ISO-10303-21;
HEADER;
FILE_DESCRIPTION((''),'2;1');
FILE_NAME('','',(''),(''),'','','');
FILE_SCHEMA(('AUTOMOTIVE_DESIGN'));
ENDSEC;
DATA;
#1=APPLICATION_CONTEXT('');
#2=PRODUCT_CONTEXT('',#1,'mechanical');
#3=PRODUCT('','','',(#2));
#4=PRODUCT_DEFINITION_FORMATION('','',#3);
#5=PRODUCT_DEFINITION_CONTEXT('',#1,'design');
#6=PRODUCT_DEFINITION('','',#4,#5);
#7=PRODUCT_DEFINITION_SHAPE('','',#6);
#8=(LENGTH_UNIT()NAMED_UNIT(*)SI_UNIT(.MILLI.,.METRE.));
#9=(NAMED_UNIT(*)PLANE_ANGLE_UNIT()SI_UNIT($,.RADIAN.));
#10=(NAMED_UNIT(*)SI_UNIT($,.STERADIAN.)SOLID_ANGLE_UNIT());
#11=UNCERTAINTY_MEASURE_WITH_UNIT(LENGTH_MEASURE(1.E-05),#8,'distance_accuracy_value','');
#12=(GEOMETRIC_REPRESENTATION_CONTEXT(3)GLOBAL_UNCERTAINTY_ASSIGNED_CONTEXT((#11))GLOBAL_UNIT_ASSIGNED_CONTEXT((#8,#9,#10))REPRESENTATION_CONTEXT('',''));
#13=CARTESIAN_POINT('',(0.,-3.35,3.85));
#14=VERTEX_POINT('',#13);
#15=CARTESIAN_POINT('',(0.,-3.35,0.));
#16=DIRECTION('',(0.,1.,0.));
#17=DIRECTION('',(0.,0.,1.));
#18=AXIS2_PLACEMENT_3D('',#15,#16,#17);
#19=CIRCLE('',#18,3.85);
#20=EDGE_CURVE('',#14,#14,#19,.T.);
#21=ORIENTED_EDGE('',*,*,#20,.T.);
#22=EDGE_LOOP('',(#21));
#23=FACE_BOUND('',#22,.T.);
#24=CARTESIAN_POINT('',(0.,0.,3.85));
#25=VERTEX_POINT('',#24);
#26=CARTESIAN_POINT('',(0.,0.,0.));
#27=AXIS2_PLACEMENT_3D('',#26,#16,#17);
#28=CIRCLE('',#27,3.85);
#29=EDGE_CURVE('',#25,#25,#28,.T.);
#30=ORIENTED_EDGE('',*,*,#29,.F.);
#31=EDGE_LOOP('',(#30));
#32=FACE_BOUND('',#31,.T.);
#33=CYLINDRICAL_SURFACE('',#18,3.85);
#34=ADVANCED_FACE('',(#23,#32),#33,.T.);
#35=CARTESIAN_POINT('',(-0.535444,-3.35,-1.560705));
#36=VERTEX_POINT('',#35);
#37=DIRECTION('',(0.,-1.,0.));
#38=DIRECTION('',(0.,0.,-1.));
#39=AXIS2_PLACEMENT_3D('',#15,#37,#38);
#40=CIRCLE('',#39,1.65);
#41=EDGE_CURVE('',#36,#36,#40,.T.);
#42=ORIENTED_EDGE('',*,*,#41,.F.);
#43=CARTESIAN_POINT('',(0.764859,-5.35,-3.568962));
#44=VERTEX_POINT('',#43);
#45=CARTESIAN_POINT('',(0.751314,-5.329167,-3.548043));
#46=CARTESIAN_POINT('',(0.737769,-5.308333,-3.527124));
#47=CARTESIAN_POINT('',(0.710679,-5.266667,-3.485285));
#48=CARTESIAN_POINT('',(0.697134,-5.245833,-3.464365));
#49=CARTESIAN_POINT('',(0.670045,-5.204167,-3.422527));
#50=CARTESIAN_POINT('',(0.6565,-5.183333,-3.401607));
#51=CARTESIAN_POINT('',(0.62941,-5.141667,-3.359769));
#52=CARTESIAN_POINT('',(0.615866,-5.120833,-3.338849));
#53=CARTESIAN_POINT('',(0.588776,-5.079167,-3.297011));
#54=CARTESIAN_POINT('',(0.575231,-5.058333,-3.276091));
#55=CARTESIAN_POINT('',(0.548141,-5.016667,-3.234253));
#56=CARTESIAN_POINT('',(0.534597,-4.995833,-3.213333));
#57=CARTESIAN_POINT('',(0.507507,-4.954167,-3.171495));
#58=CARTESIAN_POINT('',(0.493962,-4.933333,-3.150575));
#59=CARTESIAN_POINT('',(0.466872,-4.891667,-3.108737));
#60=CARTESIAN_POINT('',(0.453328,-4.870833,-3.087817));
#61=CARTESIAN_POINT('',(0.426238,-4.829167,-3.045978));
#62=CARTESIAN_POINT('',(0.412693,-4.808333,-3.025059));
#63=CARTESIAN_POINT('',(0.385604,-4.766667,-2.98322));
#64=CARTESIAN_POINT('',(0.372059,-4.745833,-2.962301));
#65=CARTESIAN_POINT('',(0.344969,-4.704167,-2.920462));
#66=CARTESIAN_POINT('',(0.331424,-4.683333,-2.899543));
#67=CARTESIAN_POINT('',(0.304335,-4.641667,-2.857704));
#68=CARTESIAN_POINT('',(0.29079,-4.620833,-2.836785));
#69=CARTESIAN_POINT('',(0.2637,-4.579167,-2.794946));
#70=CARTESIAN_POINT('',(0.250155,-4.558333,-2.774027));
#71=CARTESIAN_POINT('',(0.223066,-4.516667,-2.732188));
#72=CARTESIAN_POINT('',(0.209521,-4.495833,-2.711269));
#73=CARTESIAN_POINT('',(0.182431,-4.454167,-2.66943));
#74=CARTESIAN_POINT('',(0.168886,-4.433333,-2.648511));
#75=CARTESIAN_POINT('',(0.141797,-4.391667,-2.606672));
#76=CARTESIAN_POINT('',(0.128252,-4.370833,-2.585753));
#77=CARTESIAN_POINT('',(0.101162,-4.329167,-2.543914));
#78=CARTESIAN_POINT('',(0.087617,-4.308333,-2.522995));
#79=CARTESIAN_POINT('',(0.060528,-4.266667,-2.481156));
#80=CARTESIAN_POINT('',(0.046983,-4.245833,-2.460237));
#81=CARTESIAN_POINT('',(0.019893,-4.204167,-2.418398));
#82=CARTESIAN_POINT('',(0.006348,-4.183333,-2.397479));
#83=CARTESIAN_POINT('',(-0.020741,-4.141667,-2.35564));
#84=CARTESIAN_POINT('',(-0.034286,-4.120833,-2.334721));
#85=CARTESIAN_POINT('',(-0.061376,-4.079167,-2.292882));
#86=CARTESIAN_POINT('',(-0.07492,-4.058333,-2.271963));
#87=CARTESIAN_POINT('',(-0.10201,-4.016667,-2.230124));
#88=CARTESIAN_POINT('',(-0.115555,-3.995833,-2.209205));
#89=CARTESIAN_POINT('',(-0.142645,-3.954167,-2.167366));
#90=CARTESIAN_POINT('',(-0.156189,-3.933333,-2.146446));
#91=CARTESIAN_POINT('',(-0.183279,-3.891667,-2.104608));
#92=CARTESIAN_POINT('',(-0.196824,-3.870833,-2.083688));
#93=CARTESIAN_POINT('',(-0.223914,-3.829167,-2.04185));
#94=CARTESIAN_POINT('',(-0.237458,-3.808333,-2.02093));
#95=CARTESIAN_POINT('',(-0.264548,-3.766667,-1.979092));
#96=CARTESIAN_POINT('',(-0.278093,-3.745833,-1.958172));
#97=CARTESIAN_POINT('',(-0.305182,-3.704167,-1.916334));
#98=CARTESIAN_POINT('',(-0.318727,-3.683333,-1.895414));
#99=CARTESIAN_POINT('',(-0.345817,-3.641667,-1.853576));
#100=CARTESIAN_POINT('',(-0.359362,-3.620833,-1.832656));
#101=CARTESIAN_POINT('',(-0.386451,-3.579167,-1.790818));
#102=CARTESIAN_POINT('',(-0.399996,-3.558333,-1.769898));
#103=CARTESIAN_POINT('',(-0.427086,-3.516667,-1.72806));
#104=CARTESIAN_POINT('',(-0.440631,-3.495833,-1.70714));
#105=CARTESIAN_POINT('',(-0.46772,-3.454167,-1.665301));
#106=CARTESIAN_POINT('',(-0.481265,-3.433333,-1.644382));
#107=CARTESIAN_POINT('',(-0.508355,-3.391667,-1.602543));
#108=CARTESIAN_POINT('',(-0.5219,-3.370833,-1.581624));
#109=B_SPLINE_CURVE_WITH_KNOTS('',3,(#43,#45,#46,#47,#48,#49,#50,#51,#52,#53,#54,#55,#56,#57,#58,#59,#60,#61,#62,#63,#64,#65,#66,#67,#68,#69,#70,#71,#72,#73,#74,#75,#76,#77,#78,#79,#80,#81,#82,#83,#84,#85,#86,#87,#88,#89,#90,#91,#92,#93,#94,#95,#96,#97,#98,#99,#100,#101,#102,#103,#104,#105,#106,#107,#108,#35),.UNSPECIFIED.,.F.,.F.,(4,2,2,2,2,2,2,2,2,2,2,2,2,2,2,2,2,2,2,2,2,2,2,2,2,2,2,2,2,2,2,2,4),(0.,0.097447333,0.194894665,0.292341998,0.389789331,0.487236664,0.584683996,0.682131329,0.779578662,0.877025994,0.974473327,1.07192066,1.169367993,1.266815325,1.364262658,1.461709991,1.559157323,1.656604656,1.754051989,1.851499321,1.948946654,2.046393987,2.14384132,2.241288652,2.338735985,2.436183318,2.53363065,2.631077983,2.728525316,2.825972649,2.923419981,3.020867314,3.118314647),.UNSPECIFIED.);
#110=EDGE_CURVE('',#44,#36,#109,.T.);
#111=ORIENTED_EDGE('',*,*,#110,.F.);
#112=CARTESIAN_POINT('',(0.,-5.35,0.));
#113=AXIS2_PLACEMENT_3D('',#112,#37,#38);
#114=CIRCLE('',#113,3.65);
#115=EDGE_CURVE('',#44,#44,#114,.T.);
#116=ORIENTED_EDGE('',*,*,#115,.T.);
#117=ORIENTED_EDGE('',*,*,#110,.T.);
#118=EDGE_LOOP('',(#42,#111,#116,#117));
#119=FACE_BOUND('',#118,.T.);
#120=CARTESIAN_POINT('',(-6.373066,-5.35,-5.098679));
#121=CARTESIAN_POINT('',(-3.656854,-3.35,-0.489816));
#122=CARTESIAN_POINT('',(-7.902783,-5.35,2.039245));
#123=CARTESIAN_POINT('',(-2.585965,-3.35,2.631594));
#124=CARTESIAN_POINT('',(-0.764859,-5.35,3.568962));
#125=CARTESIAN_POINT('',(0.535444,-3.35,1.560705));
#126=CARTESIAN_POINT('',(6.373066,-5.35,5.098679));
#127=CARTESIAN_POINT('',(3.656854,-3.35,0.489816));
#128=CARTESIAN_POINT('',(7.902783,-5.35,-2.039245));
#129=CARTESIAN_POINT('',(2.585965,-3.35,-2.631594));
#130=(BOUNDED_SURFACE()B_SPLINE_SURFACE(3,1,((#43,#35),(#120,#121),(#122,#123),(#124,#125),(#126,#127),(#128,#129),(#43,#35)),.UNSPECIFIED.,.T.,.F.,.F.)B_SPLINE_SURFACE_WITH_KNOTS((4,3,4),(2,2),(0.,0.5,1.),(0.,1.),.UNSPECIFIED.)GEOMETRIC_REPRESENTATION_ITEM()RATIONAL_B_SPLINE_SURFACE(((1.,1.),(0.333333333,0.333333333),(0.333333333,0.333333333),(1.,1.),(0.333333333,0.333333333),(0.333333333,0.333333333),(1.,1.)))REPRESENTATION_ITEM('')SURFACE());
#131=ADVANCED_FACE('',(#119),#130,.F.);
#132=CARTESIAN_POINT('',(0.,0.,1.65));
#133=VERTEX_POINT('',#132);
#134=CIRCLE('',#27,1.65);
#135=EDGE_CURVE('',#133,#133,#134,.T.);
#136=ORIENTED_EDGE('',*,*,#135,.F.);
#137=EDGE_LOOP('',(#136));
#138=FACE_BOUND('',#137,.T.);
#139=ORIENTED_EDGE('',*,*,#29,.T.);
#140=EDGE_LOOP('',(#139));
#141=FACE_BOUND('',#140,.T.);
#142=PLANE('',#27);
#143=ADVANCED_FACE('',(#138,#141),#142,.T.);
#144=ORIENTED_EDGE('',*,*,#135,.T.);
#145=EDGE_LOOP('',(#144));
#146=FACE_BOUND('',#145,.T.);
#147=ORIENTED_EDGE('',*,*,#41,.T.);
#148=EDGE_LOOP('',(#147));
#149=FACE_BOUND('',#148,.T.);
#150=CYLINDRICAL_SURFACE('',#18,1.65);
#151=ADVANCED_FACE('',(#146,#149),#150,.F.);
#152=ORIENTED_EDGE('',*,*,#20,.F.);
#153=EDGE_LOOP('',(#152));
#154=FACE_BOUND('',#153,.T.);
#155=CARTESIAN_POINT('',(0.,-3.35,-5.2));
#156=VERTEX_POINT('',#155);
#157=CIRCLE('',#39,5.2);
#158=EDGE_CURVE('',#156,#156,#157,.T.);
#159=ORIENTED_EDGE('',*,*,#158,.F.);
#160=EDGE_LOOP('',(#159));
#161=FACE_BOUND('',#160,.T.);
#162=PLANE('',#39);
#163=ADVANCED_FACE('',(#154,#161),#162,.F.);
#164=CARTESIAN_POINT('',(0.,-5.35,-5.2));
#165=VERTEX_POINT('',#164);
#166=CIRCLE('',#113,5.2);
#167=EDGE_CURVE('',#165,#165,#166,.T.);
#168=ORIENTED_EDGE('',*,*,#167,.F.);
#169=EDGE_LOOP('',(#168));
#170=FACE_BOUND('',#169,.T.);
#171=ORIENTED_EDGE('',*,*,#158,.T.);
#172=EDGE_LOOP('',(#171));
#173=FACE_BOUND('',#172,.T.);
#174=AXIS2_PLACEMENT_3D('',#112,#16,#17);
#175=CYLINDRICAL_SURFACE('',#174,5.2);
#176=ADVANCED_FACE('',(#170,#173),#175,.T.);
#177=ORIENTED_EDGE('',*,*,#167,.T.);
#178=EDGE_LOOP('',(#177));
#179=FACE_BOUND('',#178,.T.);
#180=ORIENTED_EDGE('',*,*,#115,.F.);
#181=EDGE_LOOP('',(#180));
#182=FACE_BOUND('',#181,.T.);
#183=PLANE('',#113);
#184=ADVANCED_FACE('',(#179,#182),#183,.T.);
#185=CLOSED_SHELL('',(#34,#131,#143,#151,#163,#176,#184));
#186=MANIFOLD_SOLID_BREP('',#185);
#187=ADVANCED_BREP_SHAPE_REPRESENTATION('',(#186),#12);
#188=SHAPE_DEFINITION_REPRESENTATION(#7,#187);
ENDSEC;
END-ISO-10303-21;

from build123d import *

# Parameters (mm, degrees)
SKETCH_2_R      = 3.85
SKETCH_2_R_2    = 1.65
EXTRUDE_8_DEPTH = 3.35
SKETCH_3_R      = 5.2
EXTRUDE_9_DEPTH = 2


with BuildPart() as part:
    # 草图2 → 凸台-拉伸8 (new body)
    with BuildSketch(Plane(origin=(0, 0, 0), x_dir=(1, 0, 0), z_dir=(0, 1, 0))):
        with Locations(Location((0, 0, 0), (0, 0, 270))):
            Circle(SKETCH_2_R)
        with Locations(Location((0, 0, 0), (0, 0, 270))):
            Circle(SKETCH_2_R_2, mode=Mode.SUBTRACT)
    extrude(amount=-EXTRUDE_8_DEPTH)

    # 草图3 → 凸台-拉伸9 (add)
    with BuildSketch(Plane(origin=(0, -3.35, 0), x_dir=(-1, 0, 0), z_dir=(0, -1, 0))):
        with Locations(Location((0, 0, 0), (0, 0, 90))):
            Circle(SKETCH_3_R)
    extrude(amount=EXTRUDE_9_DEPTH)

    # 切除-放样1: read off the stored shape, not the designer's step
    # 切除-放样1: loft between two sections, ruled curve by curve
    loft_1_from = [
        Edge.make_bspline([(0.764858596, -5.35, -3.56896222), (-6.373065844, -5.35, -5.098679412), (-7.902783036, -5.35, 2.039245028), (-0.764858596, -5.35, 3.56896222), (6.373065844, -5.35, 5.098679412), (7.902783036, -5.35, -2.039245028), (0.764858596, -5.35, -3.56896222)], [0, 0, 0, 0, 0.5, 0.5, 0.5, 1, 1, 1, 1], 3, [1, 0.333333333, 0.333333333, 1, 0.333333333, 0.333333333, 1]),
    ]
    loft_1_to = [
        Edge.make_bspline([(-0.535444465, -3.35, -1.56070472), (-3.656853906, -3.35, -0.48981579), (-2.585964976, -3.35, 2.631593651), (0.535444465, -3.35, 1.56070472), (3.656853906, -3.35, 0.48981579), (2.585964976, -3.35, -2.631593651), (-0.535444465, -3.35, -1.56070472)], [0, 0, 0, 0, 0.5, 0.5, 0.5, 1, 1, 1, 1], 3, [1, 0.333333333, 0.333333333, 1, 0.333333333, 0.333333333, 1]),
    ]
    loft_1 = Solid(Shell([*[Face.make_surface_from_curves(loft_1_from[k], loft_1_to[k]) for k in range(1)], Face(Wire(loft_1_from)), Face(Wire(loft_1_to))]))
    add(loft_1, mode=Mode.SUBTRACT)


solid = part.part
